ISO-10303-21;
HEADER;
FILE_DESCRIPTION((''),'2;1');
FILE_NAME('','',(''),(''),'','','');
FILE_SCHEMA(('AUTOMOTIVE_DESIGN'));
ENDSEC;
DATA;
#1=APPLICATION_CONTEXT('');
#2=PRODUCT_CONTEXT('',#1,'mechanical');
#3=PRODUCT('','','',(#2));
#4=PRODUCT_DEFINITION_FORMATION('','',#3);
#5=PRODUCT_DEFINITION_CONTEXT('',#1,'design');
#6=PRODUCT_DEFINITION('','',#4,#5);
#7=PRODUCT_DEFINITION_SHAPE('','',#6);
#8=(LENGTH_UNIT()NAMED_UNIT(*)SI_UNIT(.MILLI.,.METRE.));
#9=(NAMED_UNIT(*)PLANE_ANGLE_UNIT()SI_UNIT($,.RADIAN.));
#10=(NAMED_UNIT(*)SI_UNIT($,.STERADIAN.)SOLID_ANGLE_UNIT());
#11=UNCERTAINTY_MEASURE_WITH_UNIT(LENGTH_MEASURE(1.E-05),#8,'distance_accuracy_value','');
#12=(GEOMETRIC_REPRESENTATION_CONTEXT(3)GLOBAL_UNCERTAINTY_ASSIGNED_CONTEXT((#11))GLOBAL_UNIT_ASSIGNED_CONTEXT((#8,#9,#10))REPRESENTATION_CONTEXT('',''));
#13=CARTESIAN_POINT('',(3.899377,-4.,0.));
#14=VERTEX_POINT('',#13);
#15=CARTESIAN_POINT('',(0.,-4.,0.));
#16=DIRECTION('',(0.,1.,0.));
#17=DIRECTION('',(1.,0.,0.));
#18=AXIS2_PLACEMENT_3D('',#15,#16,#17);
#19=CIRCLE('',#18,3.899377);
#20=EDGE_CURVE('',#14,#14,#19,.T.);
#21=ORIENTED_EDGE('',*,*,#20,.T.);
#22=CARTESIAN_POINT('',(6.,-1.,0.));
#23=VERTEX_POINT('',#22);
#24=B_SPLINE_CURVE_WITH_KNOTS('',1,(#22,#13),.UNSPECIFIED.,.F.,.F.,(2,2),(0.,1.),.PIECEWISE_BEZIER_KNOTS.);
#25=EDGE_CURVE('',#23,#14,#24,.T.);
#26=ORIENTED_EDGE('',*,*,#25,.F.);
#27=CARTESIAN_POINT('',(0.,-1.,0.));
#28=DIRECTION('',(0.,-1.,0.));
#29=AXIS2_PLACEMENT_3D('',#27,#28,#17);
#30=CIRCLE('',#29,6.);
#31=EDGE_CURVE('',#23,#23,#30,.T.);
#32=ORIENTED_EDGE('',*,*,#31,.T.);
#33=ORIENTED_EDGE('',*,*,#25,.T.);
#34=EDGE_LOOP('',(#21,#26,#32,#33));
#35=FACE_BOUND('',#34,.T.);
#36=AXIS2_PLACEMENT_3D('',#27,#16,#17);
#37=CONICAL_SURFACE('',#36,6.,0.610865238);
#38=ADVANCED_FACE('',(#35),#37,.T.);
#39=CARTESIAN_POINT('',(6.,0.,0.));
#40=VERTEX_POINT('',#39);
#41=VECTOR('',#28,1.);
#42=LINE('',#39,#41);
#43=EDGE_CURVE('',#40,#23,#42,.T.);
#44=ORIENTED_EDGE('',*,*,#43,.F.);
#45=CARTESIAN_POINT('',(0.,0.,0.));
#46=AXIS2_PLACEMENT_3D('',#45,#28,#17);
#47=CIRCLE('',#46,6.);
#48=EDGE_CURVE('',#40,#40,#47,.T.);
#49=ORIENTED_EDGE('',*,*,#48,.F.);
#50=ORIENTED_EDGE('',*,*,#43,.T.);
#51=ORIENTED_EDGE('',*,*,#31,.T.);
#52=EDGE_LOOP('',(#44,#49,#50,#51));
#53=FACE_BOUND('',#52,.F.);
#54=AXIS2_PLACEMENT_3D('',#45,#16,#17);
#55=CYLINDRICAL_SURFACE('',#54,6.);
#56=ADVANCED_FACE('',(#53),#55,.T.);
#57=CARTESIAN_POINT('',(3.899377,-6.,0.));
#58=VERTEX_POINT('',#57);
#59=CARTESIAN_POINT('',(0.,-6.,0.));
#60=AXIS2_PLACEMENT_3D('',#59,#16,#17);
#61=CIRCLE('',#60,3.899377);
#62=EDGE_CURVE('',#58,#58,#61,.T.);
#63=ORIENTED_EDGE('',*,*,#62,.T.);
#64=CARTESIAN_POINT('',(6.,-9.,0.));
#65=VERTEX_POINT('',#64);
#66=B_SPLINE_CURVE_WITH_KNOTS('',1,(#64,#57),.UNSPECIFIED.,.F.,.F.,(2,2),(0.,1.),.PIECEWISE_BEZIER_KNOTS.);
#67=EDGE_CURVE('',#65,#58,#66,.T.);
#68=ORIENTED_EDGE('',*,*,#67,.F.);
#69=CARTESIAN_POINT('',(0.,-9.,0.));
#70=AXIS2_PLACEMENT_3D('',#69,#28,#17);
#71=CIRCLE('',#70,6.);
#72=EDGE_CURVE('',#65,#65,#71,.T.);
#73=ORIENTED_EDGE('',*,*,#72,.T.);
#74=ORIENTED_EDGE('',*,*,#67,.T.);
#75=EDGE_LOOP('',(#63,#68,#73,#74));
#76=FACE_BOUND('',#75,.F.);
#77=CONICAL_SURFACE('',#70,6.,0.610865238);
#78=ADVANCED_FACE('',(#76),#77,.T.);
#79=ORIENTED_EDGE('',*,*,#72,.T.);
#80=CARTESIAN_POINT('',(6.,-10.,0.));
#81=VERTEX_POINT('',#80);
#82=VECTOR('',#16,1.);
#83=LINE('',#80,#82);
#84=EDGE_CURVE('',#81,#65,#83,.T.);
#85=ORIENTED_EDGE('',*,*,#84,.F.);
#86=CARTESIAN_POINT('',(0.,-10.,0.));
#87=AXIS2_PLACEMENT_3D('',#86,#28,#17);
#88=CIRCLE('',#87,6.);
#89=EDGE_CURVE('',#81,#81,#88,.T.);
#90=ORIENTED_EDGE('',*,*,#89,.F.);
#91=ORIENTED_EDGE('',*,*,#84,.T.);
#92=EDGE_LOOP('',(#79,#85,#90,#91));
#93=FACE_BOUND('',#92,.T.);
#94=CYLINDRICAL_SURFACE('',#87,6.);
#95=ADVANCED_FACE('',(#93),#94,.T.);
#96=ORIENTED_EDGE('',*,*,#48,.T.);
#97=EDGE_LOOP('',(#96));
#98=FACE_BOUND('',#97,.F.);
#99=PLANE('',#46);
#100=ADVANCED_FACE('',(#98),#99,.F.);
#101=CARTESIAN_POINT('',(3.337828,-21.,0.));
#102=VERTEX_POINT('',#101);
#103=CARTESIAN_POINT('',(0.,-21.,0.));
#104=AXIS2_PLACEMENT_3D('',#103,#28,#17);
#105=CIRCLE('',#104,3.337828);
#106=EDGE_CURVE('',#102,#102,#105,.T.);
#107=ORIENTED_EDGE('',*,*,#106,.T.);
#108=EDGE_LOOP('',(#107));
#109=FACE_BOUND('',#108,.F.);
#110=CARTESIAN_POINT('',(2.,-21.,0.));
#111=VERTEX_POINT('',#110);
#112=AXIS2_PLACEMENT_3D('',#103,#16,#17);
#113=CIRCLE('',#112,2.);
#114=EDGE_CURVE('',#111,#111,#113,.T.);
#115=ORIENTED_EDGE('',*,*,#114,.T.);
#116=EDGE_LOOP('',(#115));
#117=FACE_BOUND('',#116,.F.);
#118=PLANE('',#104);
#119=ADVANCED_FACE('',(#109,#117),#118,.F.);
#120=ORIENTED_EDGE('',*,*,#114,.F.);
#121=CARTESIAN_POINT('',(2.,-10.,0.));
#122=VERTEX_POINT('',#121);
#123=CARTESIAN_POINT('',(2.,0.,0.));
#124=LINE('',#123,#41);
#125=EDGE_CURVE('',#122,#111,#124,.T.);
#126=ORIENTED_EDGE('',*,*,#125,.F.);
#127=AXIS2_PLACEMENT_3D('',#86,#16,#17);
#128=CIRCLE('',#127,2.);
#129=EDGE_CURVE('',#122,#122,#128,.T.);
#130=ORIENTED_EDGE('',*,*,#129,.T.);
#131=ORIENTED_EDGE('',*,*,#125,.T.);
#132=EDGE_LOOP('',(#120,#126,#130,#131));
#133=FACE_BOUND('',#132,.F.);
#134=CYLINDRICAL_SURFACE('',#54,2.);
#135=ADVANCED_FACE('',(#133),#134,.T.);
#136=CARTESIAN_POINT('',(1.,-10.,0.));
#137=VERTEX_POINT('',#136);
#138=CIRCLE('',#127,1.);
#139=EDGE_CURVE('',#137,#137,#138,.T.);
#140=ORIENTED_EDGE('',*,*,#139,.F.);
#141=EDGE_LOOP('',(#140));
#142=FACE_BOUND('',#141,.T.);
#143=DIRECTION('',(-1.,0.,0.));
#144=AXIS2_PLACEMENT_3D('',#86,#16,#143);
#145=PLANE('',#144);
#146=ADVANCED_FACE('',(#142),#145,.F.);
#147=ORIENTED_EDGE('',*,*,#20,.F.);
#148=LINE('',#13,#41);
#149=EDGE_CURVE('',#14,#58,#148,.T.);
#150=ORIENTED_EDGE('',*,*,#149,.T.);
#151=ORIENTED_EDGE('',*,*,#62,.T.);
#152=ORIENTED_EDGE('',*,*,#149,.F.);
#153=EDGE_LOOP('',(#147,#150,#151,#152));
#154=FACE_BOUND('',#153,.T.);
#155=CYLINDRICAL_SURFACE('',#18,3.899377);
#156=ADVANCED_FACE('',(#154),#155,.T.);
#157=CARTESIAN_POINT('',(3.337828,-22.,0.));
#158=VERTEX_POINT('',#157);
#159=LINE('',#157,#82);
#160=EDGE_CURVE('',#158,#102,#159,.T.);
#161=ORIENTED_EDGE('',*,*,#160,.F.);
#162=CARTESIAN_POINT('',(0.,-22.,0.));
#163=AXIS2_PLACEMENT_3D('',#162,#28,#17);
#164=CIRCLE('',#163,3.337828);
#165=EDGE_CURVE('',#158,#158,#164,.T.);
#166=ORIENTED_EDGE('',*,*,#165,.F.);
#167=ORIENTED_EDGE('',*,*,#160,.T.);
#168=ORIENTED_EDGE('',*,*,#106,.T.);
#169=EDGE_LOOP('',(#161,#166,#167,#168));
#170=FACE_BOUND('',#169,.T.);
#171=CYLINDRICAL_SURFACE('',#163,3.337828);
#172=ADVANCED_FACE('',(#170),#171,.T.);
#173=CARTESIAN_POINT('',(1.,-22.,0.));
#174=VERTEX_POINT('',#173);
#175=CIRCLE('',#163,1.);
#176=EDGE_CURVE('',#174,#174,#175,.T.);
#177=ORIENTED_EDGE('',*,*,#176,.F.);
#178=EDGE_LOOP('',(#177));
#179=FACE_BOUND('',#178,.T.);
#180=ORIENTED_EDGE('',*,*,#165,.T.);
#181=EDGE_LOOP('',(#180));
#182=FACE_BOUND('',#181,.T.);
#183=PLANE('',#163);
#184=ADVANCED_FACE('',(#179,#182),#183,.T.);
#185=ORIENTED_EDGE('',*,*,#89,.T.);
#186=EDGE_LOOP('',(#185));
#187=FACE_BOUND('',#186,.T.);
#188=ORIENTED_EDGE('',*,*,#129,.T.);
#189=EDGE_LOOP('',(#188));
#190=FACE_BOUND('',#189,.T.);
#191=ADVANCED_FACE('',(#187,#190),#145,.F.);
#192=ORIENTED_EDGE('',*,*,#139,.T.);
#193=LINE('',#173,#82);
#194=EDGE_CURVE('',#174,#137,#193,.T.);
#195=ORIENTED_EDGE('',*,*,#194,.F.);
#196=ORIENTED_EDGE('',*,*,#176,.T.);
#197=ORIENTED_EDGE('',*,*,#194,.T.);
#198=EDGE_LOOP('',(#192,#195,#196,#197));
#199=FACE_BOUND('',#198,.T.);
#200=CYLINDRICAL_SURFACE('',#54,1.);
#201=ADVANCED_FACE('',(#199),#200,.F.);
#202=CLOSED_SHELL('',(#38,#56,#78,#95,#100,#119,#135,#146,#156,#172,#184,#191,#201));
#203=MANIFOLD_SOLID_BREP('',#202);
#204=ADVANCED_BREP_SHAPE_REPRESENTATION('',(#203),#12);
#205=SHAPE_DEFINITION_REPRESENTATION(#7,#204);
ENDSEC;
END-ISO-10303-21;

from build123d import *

# Parameters (mm, degrees)
F0_R      = 2
F0_R_2    = 1
F1_DEPTH  = 22
F0_R_3    = 6
F0_R_4    = 3.5
F2_DEPTH  = 1
F2_FACE_R = 6
F3_DEPTH  = 3
F3_TAPER  = 35
F4_DEPTH  = 2
F7_R      = 3.33782825
F7_R_2    = 2
F7_R_3    = 1
F8_DEPTH  = 1


# Not quite as in the source:
# - a feature of the source that left no trace in its solid (it failed there, or was rolled back) is left out
# - a pattern or mirror of a feature is missing from the dataset's text; its kind, count and spacing are read off the source's solid


with BuildPart() as f1:
    # F0 (on Front) → F1 (new body)
    with BuildSketch(Plane.XZ):
        Circle(F0_R)
        Circle(F0_R_2, mode=Mode.SUBTRACT)
    extrude(amount=F1_DEPTH)

    # F2_copies: F2 across plane


with BuildPart() as f2:
    # F0 (on Front) → F2 (new body)
    with BuildSketch(Plane.XZ):
        Circle(F0_R_3)
        Circle(F0_R_4, mode=Mode.SUBTRACT)
        Circle(F0_R_4)
        Circle(F0_R, mode=Mode.SUBTRACT)
        Circle(F0_R)
        Circle(F0_R_2, mode=Mode.SUBTRACT)
        Circle(F0_R_2)
    extrude(amount=F2_DEPTH)


with BuildPart() as f1_1:
    add(f1.part)
    add(f2.part.mirror(Plane(origin=(0, -5, 0), x_dir=(0, 0, -1), z_dir=(0, -1, 0))))


    add(f2.part)  # F3 merges F2
    # F2_face (on face) → F3 (join)
    with BuildSketch(Plane.XZ.offset(1)):
        Circle(F2_FACE_R)
    f3 = extrude(amount=F3_DEPTH, taper=F3_TAPER)

    # F3_copies: F3 across plane
    add(f3.mirror(Plane(origin=(0, -5, 0), x_dir=(0, 0, -1), z_dir=(0, -1, 0))))

    # F4 (add): faces of the model
    f4_faces = [f1_1.faces().sort_by_distance(p)[0] for p in [
        (-3.7890863377, -4, 0),
        (0, -4, 0),
    ]]
    extrude(f4_faces, amount=F4_DEPTH)

    # F7 (on face) → F8 (join)
    with BuildSketch(Plane.XZ.offset(22)):
        Circle(F7_R)
        Circle(F7_R_2, mode=Mode.SUBTRACT)
        Circle(F7_R_2)
        Circle(F7_R_3, mode=Mode.SUBTRACT)
    extrude(amount=-F8_DEPTH)


solid = f1_1.part
